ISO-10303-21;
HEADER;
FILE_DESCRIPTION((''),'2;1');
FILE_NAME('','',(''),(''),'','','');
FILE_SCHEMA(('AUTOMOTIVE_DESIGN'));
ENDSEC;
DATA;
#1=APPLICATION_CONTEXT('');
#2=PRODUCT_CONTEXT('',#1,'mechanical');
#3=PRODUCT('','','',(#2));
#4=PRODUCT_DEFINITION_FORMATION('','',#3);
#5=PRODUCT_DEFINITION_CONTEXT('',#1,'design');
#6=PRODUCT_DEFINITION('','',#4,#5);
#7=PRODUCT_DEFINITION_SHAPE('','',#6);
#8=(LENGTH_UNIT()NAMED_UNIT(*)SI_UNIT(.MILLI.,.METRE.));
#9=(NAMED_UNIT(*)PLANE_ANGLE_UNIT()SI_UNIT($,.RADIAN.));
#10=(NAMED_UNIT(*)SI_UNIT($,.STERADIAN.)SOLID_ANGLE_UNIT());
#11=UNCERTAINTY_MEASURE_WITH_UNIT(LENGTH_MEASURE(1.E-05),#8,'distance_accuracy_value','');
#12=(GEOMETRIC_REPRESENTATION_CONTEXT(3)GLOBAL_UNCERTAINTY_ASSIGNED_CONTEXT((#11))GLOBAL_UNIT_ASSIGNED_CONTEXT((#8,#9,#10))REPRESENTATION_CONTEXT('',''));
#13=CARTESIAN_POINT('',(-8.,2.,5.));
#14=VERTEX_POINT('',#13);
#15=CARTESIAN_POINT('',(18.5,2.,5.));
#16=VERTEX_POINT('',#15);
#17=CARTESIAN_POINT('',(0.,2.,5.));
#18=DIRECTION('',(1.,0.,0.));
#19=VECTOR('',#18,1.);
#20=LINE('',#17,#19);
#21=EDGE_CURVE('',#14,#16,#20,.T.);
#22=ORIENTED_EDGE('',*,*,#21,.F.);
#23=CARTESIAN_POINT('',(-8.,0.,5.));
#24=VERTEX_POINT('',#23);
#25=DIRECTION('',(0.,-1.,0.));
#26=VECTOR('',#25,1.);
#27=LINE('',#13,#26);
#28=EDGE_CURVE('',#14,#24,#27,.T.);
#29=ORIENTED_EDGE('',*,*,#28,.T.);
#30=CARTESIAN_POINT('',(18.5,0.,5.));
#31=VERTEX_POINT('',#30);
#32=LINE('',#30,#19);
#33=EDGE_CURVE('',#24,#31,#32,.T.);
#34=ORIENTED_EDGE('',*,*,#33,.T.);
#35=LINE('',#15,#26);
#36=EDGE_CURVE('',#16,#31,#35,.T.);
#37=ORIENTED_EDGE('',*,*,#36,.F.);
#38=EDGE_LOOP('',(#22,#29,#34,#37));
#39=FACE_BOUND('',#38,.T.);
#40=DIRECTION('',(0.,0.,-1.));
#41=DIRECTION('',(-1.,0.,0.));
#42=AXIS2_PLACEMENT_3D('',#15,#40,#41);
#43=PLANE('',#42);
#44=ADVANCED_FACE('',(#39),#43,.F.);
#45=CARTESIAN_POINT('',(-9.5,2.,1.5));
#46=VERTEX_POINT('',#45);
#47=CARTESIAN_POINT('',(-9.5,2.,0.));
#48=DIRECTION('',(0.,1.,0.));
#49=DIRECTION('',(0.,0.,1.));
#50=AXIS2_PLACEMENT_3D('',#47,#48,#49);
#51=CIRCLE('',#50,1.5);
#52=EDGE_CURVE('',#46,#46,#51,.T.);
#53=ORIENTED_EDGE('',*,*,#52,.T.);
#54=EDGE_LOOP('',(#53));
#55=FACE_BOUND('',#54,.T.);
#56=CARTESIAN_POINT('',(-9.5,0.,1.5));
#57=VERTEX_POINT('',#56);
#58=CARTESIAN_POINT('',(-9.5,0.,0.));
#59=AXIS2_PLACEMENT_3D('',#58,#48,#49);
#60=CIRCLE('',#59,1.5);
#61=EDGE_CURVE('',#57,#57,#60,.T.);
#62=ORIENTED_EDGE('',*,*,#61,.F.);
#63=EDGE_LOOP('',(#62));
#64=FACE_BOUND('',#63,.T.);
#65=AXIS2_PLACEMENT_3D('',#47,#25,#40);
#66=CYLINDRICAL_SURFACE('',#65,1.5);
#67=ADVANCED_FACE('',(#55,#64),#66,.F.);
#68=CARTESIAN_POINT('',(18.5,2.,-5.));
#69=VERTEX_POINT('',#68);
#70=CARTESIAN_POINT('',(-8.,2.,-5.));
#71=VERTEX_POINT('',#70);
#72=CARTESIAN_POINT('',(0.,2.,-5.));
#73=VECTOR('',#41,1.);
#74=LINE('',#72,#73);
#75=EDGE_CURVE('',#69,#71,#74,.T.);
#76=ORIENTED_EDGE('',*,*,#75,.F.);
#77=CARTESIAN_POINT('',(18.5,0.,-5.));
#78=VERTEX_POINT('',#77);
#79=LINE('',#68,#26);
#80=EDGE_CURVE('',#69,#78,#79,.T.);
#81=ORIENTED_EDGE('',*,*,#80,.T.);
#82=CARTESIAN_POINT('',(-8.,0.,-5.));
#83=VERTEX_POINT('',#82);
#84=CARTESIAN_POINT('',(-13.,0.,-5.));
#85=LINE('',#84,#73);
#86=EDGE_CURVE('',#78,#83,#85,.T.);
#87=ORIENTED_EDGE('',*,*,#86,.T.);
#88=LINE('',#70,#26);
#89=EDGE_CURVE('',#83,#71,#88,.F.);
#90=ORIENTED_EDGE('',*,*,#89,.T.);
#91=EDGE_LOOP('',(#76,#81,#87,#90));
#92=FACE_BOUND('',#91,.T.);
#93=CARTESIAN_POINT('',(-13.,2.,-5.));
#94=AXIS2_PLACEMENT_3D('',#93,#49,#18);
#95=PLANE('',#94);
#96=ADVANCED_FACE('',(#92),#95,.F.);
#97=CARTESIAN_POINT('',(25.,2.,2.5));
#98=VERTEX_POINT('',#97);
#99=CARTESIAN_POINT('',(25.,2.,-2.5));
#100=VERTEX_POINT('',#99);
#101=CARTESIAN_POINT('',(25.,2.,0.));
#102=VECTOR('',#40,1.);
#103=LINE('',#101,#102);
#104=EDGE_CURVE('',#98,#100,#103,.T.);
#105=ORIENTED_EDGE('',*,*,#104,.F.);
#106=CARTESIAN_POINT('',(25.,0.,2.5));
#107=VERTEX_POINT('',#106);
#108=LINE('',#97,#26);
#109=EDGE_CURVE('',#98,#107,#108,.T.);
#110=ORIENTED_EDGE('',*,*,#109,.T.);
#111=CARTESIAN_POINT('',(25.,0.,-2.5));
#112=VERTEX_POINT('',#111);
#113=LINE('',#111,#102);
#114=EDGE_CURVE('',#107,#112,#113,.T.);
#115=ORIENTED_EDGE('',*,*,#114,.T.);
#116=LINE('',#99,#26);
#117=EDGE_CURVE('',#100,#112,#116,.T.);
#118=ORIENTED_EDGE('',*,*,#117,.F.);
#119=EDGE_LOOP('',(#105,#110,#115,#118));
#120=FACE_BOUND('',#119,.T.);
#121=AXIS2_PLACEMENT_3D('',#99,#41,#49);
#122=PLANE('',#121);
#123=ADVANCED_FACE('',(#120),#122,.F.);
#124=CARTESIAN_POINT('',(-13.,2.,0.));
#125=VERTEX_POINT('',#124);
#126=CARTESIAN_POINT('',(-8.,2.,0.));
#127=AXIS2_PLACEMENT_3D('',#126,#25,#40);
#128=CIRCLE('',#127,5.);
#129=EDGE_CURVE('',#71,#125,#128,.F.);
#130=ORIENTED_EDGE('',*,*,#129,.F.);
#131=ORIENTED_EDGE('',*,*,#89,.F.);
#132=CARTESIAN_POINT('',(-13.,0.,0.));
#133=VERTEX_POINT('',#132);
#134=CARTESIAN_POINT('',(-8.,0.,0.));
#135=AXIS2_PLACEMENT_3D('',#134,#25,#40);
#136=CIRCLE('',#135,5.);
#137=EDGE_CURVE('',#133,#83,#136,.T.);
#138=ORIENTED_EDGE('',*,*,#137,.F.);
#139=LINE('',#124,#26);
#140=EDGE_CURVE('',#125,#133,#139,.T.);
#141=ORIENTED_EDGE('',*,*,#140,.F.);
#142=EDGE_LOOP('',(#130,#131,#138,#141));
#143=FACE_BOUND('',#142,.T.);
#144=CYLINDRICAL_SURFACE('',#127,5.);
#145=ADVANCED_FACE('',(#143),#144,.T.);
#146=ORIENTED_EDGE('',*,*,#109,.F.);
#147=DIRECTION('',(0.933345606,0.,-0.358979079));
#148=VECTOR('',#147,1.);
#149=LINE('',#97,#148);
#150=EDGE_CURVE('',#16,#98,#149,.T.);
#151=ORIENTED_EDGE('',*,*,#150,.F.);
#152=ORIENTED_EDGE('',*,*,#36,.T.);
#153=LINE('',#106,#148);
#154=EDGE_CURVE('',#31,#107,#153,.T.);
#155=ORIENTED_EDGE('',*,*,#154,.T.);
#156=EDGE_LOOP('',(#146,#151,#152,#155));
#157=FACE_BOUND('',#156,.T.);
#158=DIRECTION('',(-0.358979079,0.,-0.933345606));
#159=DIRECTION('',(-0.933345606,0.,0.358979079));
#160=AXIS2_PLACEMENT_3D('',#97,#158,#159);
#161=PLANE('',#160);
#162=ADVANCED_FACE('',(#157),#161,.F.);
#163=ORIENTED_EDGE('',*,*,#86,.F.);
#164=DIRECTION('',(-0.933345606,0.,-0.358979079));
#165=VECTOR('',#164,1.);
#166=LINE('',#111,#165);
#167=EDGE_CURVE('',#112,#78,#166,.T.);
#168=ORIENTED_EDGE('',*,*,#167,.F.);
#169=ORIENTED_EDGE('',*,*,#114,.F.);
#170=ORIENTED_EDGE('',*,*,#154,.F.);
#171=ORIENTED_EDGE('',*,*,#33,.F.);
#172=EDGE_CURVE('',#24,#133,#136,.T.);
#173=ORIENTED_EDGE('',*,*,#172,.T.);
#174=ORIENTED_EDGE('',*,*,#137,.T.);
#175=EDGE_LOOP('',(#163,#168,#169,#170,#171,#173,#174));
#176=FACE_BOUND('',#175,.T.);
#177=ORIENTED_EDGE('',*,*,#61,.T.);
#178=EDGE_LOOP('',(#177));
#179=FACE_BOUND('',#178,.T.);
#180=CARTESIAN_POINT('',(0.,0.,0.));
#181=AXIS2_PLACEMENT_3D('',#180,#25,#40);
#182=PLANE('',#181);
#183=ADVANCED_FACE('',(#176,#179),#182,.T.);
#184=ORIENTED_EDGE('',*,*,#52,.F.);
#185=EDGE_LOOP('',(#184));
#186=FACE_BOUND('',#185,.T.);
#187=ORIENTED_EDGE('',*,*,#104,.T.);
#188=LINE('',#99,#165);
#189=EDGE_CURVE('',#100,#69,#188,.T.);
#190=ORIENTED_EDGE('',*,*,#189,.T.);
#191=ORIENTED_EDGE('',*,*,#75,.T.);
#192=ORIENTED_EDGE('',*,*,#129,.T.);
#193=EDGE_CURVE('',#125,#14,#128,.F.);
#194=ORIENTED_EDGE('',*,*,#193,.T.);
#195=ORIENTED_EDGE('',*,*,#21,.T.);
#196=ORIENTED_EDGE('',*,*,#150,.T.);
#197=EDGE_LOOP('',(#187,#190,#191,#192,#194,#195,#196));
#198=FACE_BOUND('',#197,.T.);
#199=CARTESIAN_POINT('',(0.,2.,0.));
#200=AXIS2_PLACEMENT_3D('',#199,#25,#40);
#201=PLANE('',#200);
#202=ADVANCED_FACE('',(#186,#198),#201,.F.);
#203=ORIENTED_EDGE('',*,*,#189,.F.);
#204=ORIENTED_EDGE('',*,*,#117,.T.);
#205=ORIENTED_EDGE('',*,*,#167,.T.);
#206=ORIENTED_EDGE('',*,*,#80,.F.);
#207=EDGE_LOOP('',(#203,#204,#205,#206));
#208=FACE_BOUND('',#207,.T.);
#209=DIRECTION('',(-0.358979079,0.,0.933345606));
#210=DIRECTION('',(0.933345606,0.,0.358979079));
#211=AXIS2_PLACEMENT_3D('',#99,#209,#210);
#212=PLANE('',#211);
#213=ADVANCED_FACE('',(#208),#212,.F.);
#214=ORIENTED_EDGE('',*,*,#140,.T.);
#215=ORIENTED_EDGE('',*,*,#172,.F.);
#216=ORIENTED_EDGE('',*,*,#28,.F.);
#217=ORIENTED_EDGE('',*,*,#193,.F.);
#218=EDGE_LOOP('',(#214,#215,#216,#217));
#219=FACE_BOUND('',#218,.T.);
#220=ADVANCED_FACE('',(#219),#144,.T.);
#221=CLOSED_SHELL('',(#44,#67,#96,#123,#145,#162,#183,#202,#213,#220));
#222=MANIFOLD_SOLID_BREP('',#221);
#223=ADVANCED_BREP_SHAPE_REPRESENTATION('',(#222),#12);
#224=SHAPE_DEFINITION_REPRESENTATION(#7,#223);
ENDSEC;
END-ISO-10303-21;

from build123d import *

# Parameters (mm, degrees)
CROQUIS1_R              = 1.5
SALIENTE_EXTRUIR1_DEPTH = 2
REDONDEO1_R             = 5


with BuildPart() as part:
    # Croquis1 → Saliente-Extruir1 (new body)
    with BuildSketch(Plane(origin=(0, 0, 0), x_dir=(1, 0, 0), z_dir=(0, 1, 0))):
        Polygon((-13, 0), (-13, 5), (0, 5), (18.5, 5), (25, 2.5), (25, 0), (25, -2.5), (18.5, -5), (0, -5), (-13, -5), align=None)
        with Locations(Location((-9.5, 0, 0), (0, 0, 270))):
            Circle(CROQUIS1_R, mode=Mode.SUBTRACT)
    extrude(amount=SALIENTE_EXTRUIR1_DEPTH)

    # Redondeo1
    redondeo1_edges = [part.edges().sort_by_distance(p)[0] for p in [
        (-13, 1, 5),
        (-13, 1, -5),
    ]]
    fillet(redondeo1_edges, radius=REDONDEO1_R - 0.0001)  # a hair under: the kernel refuses the full size


solid = part.part
